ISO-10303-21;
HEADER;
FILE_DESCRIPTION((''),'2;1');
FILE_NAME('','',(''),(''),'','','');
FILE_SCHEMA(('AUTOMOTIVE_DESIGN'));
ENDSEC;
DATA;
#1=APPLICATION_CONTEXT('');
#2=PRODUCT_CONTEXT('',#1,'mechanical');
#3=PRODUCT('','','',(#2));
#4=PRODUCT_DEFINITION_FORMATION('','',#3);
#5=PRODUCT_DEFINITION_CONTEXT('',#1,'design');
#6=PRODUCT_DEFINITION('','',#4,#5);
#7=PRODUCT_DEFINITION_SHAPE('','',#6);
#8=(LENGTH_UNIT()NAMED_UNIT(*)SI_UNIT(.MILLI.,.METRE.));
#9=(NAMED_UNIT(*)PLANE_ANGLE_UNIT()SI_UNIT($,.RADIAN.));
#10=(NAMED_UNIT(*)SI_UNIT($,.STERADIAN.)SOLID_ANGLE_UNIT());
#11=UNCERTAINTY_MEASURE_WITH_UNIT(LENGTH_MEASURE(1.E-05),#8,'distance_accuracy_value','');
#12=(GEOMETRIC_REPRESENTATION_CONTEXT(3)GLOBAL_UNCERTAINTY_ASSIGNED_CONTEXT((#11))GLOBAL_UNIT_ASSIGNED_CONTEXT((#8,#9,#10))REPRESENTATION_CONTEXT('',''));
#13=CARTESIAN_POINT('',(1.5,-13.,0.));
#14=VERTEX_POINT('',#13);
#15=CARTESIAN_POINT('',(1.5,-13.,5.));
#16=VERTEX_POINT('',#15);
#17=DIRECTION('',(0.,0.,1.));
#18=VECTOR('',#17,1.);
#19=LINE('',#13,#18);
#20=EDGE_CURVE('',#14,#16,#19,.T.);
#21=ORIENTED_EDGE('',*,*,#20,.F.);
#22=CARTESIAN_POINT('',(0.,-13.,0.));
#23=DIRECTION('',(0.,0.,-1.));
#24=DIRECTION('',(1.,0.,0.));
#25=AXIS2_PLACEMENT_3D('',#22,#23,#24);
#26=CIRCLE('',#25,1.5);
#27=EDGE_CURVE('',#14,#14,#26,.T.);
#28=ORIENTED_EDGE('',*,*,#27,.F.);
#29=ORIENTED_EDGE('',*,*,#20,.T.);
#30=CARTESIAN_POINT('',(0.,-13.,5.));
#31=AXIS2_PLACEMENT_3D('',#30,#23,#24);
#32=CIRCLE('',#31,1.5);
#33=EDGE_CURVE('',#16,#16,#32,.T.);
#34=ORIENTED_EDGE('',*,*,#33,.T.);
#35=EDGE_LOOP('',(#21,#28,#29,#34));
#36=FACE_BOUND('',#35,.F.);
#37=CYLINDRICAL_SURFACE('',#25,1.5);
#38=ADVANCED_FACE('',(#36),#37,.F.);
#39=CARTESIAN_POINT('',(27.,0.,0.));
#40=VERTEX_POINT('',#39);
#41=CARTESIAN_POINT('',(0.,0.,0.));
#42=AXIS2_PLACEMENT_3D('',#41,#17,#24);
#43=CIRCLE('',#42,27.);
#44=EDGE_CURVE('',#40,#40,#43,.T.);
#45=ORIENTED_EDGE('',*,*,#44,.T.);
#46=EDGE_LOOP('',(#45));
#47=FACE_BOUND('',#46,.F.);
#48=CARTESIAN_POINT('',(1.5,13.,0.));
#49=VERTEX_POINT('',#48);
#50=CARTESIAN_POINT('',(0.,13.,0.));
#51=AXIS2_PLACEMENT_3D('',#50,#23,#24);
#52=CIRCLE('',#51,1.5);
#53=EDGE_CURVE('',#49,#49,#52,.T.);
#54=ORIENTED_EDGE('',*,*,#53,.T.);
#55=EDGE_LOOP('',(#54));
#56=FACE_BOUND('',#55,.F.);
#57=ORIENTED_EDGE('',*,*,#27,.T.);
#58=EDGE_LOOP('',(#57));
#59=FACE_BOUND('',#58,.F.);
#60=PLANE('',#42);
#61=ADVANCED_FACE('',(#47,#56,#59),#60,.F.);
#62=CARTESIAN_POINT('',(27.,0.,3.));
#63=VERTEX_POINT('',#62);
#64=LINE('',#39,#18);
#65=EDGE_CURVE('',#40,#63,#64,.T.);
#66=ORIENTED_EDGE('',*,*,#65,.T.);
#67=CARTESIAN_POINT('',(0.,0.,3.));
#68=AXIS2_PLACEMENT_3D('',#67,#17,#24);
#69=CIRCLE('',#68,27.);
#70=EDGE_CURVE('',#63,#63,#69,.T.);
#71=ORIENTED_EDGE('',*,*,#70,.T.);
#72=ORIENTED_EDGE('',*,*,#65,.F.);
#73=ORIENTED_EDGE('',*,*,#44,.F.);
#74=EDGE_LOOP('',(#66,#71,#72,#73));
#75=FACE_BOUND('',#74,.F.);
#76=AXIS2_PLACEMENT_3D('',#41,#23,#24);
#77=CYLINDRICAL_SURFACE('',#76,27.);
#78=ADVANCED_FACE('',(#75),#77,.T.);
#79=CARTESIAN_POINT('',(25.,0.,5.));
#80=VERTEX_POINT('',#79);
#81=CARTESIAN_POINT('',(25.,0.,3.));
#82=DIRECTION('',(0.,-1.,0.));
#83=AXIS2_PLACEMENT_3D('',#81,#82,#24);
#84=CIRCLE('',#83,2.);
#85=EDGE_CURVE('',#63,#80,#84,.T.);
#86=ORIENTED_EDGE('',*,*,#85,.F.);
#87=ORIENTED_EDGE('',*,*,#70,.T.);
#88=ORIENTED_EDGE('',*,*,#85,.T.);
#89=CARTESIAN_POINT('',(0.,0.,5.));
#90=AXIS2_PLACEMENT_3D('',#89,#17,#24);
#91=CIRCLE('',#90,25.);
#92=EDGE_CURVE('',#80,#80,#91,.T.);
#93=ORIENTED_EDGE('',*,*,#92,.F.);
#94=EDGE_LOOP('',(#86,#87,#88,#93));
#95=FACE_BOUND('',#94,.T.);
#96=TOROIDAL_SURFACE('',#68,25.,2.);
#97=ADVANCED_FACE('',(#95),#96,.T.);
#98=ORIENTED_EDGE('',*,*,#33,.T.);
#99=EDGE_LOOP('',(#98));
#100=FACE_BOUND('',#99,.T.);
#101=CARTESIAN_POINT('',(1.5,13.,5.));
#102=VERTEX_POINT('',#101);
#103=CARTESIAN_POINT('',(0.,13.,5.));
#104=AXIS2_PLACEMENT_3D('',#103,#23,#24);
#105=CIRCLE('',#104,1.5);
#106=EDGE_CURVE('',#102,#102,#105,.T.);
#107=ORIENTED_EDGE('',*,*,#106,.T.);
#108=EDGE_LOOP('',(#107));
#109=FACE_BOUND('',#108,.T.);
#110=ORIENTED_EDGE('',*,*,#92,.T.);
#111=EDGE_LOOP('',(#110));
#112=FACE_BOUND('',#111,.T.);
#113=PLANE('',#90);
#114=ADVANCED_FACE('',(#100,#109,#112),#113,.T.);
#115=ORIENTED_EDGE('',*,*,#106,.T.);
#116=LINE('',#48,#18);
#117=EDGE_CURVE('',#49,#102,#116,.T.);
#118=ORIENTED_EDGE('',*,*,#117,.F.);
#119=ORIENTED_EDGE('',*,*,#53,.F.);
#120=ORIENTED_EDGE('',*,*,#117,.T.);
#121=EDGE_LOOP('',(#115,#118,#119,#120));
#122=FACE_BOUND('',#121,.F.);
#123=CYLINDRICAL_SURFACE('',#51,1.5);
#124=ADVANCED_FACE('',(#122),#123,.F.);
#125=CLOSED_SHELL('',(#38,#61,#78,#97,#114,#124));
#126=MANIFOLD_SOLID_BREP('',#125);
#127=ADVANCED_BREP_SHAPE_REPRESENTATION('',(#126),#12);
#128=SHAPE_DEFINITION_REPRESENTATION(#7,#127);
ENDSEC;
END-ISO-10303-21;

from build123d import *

# Parameters (mm, degrees)
F0_R     = 27
F1_DEPTH = 5
F2_R     = 2
F3_R     = 1.5
F4_DEPTH = 5.001


with BuildPart() as f1:
    # F0 (on Top) → F1 (new body)
    with BuildSketch(Plane.XY):
        Circle(F0_R)
    extrude(amount=F1_DEPTH)

    # F2
    f2_edges = [f1.edges().sort_by_distance(p)[0] for p in [
        (-27, 0, 5),
    ]]
    fillet(f2_edges, radius=F2_R)

    # F3 (on face) → F4 (cut, through all)
    with BuildSketch(Plane(origin=(0, 0, 0), x_dir=(1, 0, 0), z_dir=(0, 0, -1))):
        with Locations((0, 13)):
            Circle(F3_R)
        with Locations((0, -13)):
            Circle(F3_R)
    extrude(amount=-F4_DEPTH, mode=Mode.SUBTRACT)


solid = f1.part
